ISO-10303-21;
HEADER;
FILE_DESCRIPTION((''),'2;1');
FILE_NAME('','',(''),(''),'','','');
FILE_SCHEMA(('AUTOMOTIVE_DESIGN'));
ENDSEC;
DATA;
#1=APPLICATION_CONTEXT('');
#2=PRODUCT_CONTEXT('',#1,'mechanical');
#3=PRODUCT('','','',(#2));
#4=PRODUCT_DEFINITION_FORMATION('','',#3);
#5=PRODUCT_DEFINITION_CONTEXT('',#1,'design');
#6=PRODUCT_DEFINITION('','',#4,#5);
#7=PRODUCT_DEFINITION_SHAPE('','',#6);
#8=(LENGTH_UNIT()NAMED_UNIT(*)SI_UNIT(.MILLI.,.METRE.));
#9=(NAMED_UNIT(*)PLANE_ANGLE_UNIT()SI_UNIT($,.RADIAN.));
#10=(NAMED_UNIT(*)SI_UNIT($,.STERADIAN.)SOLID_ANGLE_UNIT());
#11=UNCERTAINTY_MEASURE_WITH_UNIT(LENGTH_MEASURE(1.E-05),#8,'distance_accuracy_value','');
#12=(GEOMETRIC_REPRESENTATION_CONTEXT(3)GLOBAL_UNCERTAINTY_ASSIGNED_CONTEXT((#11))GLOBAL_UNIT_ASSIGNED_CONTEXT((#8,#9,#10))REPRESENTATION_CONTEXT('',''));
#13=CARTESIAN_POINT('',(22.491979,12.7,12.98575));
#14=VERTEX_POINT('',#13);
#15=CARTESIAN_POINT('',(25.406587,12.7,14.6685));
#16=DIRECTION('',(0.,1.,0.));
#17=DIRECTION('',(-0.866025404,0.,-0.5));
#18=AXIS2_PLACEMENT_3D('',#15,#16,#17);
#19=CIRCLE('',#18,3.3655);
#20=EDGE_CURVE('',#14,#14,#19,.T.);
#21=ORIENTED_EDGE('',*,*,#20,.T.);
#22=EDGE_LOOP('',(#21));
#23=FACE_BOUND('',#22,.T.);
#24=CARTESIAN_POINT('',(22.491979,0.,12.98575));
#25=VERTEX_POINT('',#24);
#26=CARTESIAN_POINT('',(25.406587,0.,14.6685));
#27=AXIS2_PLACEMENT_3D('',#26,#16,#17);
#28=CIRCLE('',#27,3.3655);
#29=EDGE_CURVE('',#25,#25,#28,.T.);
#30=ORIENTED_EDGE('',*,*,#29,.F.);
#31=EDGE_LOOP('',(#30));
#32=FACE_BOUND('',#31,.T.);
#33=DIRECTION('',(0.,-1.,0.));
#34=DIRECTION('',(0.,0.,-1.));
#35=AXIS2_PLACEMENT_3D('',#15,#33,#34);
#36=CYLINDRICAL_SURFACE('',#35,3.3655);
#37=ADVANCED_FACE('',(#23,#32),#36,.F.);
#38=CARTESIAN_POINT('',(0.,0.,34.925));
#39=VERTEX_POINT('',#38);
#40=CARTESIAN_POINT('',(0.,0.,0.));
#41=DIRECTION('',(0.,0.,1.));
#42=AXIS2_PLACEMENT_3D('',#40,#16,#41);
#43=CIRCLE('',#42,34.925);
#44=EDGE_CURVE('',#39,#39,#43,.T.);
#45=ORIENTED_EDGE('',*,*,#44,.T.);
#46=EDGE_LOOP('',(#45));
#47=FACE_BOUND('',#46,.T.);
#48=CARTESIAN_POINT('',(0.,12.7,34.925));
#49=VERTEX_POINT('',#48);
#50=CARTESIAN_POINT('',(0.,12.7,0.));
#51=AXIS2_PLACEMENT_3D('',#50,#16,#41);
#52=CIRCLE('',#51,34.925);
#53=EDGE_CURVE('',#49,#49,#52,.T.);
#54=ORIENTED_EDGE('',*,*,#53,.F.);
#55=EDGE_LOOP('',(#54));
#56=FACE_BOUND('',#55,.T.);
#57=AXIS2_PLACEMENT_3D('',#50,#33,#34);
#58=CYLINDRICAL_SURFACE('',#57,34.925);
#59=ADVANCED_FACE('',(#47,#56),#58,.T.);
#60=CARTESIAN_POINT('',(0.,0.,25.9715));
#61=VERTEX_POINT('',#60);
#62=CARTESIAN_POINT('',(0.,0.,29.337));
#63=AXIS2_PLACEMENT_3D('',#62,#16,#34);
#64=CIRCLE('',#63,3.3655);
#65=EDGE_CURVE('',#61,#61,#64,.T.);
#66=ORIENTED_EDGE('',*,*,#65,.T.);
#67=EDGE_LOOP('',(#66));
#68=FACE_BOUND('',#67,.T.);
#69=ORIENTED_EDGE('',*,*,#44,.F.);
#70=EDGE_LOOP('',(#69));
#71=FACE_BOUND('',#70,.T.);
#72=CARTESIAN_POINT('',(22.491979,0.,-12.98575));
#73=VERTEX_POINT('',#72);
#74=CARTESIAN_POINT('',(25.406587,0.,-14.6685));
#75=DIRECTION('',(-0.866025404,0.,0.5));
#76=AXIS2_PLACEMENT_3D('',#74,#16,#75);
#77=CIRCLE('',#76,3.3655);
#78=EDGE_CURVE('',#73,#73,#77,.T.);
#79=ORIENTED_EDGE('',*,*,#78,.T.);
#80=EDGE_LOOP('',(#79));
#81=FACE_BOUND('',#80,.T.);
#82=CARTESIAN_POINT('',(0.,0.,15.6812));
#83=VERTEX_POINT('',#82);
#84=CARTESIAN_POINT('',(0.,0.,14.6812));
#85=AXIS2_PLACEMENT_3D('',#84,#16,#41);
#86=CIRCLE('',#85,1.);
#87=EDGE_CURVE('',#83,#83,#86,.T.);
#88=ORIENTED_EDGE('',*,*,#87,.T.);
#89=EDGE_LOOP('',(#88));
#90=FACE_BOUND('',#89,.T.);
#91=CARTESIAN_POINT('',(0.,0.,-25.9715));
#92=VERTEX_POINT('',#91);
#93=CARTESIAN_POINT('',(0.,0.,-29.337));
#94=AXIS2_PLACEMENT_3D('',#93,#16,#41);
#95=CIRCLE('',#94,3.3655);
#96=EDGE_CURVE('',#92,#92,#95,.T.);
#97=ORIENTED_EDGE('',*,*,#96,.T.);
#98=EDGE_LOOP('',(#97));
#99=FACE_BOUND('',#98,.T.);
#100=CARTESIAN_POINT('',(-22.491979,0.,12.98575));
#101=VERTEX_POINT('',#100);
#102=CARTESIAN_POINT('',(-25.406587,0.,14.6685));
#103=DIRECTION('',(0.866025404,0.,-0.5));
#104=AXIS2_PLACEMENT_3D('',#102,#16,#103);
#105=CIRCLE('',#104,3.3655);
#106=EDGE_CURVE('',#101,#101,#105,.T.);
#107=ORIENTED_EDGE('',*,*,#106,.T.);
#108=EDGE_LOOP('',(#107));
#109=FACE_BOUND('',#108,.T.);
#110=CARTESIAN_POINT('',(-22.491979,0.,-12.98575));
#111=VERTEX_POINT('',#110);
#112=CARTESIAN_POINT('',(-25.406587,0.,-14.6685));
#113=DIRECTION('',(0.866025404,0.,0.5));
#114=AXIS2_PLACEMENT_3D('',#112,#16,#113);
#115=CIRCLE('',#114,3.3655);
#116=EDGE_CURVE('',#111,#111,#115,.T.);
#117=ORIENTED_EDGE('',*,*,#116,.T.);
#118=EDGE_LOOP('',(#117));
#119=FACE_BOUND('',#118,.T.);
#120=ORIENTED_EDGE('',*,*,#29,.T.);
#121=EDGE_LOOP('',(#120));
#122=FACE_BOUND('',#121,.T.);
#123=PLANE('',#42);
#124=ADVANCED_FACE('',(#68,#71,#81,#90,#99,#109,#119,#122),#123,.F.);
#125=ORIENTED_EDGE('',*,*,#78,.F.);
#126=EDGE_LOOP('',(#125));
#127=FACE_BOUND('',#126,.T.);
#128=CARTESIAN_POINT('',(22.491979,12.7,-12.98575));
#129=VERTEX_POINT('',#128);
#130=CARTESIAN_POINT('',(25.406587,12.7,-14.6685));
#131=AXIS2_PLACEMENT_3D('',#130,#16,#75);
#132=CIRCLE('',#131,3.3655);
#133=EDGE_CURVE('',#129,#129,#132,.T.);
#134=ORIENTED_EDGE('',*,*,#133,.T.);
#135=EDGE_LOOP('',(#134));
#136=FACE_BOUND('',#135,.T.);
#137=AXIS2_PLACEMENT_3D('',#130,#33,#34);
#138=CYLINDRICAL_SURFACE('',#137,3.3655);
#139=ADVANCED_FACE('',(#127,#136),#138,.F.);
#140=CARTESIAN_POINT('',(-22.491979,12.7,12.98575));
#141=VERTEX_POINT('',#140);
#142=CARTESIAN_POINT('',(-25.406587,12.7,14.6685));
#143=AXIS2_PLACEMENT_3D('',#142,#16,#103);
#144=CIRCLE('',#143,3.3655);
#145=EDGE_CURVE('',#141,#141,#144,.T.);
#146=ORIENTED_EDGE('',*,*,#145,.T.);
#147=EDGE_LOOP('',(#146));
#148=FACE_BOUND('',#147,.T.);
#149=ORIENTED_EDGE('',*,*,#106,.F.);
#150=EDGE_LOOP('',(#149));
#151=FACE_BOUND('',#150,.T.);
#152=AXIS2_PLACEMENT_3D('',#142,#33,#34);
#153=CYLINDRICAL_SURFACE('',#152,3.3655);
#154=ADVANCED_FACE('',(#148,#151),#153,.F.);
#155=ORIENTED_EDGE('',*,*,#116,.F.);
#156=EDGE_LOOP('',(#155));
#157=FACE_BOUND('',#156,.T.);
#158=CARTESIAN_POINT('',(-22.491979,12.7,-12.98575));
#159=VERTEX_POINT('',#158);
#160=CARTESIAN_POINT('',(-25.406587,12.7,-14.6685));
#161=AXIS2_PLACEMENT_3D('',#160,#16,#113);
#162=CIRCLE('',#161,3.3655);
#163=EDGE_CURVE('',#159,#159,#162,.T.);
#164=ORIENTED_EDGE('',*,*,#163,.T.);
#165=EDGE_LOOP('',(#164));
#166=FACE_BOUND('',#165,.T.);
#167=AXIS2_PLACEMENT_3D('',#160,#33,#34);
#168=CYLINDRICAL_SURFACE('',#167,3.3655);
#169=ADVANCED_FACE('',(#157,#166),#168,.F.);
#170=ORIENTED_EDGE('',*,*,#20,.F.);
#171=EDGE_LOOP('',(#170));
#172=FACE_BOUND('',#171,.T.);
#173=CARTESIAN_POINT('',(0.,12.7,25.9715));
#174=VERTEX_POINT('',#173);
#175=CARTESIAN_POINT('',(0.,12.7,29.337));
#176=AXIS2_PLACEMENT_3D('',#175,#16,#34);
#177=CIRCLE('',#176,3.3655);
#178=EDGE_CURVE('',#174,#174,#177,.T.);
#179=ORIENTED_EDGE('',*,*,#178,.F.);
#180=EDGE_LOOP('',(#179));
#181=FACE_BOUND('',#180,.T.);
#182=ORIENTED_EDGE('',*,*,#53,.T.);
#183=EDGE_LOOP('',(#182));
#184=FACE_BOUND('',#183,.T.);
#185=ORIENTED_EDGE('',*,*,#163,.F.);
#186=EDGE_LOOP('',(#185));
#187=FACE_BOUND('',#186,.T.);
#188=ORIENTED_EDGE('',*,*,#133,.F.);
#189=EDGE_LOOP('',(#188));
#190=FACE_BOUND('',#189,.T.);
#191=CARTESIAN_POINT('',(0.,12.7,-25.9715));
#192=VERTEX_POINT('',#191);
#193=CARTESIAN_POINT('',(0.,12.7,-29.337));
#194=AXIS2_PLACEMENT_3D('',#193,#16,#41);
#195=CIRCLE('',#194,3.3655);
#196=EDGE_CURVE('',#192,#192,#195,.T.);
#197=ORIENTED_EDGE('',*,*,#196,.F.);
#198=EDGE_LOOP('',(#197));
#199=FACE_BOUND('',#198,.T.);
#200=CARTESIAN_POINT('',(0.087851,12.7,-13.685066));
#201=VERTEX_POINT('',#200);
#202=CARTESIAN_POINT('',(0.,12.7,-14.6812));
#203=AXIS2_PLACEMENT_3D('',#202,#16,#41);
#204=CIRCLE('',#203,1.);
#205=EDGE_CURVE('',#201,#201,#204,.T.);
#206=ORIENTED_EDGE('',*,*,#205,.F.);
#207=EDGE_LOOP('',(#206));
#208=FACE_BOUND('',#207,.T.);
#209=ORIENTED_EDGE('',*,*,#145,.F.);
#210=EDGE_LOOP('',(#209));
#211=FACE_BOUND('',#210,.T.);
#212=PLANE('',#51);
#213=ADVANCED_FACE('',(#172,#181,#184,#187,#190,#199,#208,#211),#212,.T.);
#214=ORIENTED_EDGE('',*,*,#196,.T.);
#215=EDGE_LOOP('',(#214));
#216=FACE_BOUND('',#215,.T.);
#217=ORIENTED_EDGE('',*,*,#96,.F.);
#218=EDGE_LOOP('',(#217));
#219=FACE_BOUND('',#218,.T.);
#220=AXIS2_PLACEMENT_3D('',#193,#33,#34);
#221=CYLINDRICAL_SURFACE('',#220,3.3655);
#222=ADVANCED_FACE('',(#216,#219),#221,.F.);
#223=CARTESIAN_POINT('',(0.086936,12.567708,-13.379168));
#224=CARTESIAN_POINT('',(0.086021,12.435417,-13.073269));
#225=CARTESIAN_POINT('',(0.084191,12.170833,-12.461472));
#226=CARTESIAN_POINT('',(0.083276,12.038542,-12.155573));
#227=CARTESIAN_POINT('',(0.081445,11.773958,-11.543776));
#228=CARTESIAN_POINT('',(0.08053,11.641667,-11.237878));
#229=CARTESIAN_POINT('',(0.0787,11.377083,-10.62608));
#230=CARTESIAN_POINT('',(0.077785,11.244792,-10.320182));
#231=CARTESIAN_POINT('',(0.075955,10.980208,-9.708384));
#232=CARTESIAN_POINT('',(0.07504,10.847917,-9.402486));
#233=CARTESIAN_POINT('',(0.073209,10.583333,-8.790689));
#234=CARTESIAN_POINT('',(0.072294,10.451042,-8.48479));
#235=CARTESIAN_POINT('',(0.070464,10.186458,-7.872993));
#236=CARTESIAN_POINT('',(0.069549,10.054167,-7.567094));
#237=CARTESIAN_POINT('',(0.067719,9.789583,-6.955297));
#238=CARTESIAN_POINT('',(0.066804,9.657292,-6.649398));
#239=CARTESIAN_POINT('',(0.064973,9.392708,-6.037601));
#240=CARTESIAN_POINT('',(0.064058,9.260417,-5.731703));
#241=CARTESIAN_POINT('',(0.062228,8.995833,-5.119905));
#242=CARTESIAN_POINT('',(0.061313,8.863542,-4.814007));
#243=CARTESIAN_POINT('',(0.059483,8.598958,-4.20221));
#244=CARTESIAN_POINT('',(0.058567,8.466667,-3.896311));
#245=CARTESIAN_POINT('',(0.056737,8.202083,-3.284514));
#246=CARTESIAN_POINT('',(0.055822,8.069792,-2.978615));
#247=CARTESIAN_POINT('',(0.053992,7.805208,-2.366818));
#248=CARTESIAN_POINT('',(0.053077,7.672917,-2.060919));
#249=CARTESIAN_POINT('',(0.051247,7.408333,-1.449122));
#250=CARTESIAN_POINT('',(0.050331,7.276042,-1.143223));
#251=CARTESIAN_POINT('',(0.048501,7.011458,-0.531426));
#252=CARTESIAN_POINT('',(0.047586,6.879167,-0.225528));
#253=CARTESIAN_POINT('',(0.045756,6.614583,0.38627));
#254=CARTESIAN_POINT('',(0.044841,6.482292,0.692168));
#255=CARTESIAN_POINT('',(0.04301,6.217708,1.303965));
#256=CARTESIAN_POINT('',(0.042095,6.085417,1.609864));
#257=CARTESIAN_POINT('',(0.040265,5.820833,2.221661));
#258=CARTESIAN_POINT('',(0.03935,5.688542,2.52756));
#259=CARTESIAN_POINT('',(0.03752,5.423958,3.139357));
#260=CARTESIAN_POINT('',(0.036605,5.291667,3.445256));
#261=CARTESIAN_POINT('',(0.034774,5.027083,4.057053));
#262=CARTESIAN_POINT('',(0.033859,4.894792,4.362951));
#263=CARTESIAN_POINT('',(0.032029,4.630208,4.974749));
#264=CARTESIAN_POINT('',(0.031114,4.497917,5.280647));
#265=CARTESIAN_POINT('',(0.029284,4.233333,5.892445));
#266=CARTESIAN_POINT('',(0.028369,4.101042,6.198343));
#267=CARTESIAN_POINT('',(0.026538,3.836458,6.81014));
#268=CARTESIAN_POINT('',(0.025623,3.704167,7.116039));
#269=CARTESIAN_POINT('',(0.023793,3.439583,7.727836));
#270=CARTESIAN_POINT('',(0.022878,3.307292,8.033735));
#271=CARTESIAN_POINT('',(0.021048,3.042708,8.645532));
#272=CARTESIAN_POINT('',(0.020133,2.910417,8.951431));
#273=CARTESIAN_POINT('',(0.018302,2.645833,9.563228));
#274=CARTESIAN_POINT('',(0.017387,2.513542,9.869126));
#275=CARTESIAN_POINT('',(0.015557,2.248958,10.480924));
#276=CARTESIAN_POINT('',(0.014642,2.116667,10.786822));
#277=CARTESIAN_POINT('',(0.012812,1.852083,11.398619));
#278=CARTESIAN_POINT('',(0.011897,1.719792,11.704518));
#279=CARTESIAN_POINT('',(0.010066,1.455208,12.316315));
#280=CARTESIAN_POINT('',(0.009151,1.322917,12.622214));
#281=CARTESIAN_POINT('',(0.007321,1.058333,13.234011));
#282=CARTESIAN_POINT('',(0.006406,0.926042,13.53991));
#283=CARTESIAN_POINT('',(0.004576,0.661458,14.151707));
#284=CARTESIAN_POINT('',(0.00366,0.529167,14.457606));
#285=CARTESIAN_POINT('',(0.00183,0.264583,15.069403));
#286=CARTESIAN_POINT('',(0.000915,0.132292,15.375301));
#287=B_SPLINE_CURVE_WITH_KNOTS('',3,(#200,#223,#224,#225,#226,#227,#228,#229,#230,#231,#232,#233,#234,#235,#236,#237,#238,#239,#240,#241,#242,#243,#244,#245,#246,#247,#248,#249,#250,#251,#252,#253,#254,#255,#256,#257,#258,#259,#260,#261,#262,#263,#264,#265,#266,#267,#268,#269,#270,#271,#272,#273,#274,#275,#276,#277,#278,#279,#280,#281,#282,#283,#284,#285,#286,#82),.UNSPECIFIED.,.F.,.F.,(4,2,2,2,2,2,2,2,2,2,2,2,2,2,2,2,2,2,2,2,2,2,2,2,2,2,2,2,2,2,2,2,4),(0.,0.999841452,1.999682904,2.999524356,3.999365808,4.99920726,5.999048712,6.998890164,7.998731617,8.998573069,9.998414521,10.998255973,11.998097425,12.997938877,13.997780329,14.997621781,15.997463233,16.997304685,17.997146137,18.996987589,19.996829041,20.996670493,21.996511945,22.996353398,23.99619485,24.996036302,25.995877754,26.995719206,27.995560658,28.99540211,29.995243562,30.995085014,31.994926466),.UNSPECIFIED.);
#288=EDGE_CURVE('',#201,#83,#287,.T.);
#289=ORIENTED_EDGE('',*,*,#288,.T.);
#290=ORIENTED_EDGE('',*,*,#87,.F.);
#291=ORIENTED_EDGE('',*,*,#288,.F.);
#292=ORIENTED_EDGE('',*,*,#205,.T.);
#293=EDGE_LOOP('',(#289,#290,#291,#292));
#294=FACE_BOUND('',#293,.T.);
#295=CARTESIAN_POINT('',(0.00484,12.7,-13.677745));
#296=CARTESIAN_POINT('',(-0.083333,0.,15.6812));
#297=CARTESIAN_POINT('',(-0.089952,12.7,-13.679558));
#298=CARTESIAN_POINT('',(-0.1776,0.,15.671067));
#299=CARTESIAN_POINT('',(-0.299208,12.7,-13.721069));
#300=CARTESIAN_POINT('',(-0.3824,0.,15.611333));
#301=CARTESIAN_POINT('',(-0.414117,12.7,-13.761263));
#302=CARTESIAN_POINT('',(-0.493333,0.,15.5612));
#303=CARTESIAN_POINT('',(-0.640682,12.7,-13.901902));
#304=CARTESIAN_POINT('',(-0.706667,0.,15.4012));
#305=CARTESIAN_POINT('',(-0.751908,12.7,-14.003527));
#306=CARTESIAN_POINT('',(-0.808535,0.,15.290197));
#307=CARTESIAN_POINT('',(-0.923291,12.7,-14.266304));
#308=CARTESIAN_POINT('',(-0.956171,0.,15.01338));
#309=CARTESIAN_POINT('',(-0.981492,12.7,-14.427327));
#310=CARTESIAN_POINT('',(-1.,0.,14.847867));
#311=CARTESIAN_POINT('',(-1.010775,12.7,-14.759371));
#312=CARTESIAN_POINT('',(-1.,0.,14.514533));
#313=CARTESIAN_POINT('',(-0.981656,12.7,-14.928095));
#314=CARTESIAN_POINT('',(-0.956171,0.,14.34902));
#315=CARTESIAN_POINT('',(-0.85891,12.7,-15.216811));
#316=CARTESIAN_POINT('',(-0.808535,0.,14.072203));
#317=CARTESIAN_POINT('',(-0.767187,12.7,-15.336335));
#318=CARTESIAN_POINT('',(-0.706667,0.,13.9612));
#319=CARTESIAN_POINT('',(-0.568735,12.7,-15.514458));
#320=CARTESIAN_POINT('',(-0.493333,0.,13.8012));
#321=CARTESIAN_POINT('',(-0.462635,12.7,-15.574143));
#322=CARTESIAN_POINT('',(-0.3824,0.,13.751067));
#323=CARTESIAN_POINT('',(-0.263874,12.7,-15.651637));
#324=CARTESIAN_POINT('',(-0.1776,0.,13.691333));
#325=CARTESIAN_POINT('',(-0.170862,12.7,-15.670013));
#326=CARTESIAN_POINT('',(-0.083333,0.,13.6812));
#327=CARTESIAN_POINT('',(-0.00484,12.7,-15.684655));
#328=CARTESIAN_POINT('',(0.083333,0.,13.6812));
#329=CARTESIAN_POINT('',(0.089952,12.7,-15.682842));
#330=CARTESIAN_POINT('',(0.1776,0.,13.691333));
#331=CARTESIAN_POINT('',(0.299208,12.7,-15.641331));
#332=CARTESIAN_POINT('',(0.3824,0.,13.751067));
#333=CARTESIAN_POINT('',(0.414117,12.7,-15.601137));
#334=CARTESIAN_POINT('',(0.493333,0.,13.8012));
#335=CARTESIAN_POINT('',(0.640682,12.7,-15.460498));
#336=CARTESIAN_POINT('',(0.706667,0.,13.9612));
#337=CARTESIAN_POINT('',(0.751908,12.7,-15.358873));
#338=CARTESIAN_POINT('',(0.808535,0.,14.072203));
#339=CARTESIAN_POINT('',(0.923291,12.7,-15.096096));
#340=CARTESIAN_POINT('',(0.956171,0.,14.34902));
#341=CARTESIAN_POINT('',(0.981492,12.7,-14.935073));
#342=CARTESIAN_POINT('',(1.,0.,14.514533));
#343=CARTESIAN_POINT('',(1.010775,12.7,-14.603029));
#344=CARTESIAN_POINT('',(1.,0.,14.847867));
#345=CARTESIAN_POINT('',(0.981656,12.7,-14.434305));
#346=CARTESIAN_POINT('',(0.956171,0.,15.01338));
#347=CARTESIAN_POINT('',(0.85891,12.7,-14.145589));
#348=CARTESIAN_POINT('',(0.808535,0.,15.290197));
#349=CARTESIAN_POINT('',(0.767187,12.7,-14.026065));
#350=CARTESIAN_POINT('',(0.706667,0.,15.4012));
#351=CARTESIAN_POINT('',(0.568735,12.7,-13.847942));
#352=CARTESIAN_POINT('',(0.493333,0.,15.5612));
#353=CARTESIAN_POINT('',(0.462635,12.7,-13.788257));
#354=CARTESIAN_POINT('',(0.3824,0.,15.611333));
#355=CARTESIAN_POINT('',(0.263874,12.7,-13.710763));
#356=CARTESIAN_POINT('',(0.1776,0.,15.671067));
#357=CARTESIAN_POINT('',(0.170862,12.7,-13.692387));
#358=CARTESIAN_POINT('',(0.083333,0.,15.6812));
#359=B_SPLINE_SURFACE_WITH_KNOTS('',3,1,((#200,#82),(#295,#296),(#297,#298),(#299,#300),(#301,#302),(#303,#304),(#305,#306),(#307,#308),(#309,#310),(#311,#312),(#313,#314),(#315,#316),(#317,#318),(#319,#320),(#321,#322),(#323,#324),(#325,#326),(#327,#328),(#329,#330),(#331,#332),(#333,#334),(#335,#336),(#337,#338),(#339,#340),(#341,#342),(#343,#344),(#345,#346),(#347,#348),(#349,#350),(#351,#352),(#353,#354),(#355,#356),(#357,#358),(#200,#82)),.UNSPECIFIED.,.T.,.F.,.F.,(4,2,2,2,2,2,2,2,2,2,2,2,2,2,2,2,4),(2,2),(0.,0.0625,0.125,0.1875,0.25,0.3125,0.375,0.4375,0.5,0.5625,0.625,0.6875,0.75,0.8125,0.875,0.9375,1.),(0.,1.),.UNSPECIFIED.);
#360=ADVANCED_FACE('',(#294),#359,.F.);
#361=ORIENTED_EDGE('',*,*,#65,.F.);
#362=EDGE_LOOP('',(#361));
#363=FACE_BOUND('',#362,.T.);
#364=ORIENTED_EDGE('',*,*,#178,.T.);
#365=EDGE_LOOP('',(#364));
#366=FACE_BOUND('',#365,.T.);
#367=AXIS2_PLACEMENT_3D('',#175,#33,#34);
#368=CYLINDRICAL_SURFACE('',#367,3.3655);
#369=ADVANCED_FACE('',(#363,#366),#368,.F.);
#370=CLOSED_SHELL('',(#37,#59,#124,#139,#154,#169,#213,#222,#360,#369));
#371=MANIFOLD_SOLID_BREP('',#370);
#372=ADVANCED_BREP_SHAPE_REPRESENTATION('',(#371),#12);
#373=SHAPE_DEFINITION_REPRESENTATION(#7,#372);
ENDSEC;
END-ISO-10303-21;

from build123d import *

# Parameters (mm, degrees)
SKETCH1_R          = 34.925
EXTRUDE1_DEPTH     = 12.7
SKETCH3_R          = 3.3655
CUT_EXTRUDE2_DEPTH = 12.7
CIRPATTERN1_COUNT  = 6


with BuildPart() as part:
    # Sketch1 → Extrude1 (new body)
    with BuildSketch(Plane(origin=(0, 0, 0), x_dir=(1, 0, 0), z_dir=(0, 1, 0))):
        with Locations(Location((0, 0, 0), (0, 0, 270))):
            Circle(SKETCH1_R)
    extrude(amount=EXTRUDE1_DEPTH)

    # Sketch3 → Cut-Extrude2 (cut)
    with BuildSketch(Plane(origin=(0, 0, 0), x_dir=(1, 0, 0), z_dir=(0, 1, 0))):
        with Locations(Location((0, 29.337, 0), (0, 0, 270))):
            Circle(SKETCH3_R)
    cut_extrude2 = extrude(amount=CUT_EXTRUDE2_DEPTH, mode=Mode.SUBTRACT)

    # CirPattern1: Cut-Extrude2 ×6 about axis
    cirpattern1_axis = Axis((0, 0, 0), (0, 1, 0))
    for i in range(1, CIRPATTERN1_COUNT):
        add(cut_extrude2.rotate(cirpattern1_axis, i * 360 / CIRPATTERN1_COUNT), mode=Mode.SUBTRACT)

    # Cut-Loft1: read off the stored shape, not the designer's step
    # Cut-Loft1: loft between two sections, ruled curve by curve
    cut_loft1_from = [
        Edge.make_bspline([(0.087851197, 12.7, -13.685066391), (0.004840062, 12.7, -13.677745458), (-0.089952358, 12.7, -13.679558172), (-0.299208166, 12.7, -13.721068628), (-0.414116861, 12.7, -13.7612625), (-0.640681556, 12.7, -13.901902289), (-0.751907991, 12.7, -14.003527296), (-0.92329137, 12.7, -14.266303666), (-0.981491743, 12.7, -14.427326535), (-1.010775475, 12.7, -14.759371072), (-0.981656178, 12.7, -14.928094853), (-0.85891014, 12.7, -15.216811138), (-0.767187279, 12.7, -15.336334686), (-0.568734967, 12.7, -15.514457652), (-0.462634818, 12.7, -15.574142777), (-0.2638743, 12.7, -15.651637083), (-0.170862331, 12.7, -15.670012676), (-0.004840062, 12.7, -15.684654542), (0.089952358, 12.7, -15.682841828), (0.299208166, 12.7, -15.641331372), (0.414116861, 12.7, -15.6011375), (0.640681556, 12.7, -15.460497711), (0.751907991, 12.7, -15.358872704), (0.92329137, 12.7, -15.096096334), (0.981491743, 12.7, -14.935073465), (1.010775475, 12.7, -14.603028928), (0.981656178, 12.7, -14.434305147), (0.85891014, 12.7, -14.145588862), (0.767187279, 12.7, -14.026065314), (0.568734967, 12.7, -13.847942348), (0.462634818, 12.7, -13.788257223), (0.2638743, 12.7, -13.710762917), (0.170862331, 12.7, -13.692387324), (0.087851197, 12.7, -13.685066391)], [0, 0, 0, 0, 0.0625, 0.0625, 0.125, 0.125, 0.1875, 0.1875, 0.25, 0.25, 0.3125, 0.3125, 0.375, 0.375, 0.4375, 0.4375, 0.5, 0.5, 0.5625, 0.5625, 0.625, 0.625, 0.6875, 0.6875, 0.75, 0.75, 0.8125, 0.8125, 0.875, 0.875, 0.9375, 0.9375, 1, 1, 1, 1], 3),
    ]
    cut_loft1_to = [
        Edge.make_bspline([(0, 0, 15.6812), (-0.083333333, 0, 15.6812), (-0.1776, 0, 15.671066667), (-0.3824, 0, 15.611333333), (-0.493333333, 0, 15.5612), (-0.706666667, 0, 15.4012), (-0.808535179, 0, 15.29019654), (-0.956170704, 0, 15.013379931), (-1, 0, 14.847866667), (-1, 0, 14.514533333), (-0.956170704, 0, 14.349020069), (-0.808535179, 0, 14.07220346), (-0.706666667, 0, 13.9612), (-0.493333333, 0, 13.8012), (-0.3824, 0, 13.751066667), (-0.1776, 0, 13.691333333), (-0.083333333, 0, 13.6812), (0.083333333, 0, 13.6812), (0.1776, 0, 13.691333333), (0.3824, 0, 13.751066667), (0.493333333, 0, 13.8012), (0.706666667, 0, 13.9612), (0.808535179, 0, 14.07220346), (0.956170704, 0, 14.349020069), (1, 0, 14.514533333), (1, 0, 14.847866667), (0.956170704, 0, 15.013379931), (0.808535179, 0, 15.29019654), (0.706666667, 0, 15.4012), (0.493333333, 0, 15.5612), (0.3824, 0, 15.611333333), (0.1776, 0, 15.671066667), (0.083333333, 0, 15.6812), (0, 0, 15.6812)], [0, 0, 0, 0, 0.0625, 0.0625, 0.125, 0.125, 0.1875, 0.1875, 0.25, 0.25, 0.3125, 0.3125, 0.375, 0.375, 0.4375, 0.4375, 0.5, 0.5, 0.5625, 0.5625, 0.625, 0.625, 0.6875, 0.6875, 0.75, 0.75, 0.8125, 0.8125, 0.875, 0.875, 0.9375, 0.9375, 1, 1, 1, 1], 3),
    ]
    cut_loft1 = Solid(Shell([*[Face.make_surface_from_curves(cut_loft1_from[k], cut_loft1_to[k]) for k in range(1)], Face(Wire(cut_loft1_from)), Face(Wire(cut_loft1_to))]))
    add(cut_loft1, mode=Mode.SUBTRACT)


solid = part.part
